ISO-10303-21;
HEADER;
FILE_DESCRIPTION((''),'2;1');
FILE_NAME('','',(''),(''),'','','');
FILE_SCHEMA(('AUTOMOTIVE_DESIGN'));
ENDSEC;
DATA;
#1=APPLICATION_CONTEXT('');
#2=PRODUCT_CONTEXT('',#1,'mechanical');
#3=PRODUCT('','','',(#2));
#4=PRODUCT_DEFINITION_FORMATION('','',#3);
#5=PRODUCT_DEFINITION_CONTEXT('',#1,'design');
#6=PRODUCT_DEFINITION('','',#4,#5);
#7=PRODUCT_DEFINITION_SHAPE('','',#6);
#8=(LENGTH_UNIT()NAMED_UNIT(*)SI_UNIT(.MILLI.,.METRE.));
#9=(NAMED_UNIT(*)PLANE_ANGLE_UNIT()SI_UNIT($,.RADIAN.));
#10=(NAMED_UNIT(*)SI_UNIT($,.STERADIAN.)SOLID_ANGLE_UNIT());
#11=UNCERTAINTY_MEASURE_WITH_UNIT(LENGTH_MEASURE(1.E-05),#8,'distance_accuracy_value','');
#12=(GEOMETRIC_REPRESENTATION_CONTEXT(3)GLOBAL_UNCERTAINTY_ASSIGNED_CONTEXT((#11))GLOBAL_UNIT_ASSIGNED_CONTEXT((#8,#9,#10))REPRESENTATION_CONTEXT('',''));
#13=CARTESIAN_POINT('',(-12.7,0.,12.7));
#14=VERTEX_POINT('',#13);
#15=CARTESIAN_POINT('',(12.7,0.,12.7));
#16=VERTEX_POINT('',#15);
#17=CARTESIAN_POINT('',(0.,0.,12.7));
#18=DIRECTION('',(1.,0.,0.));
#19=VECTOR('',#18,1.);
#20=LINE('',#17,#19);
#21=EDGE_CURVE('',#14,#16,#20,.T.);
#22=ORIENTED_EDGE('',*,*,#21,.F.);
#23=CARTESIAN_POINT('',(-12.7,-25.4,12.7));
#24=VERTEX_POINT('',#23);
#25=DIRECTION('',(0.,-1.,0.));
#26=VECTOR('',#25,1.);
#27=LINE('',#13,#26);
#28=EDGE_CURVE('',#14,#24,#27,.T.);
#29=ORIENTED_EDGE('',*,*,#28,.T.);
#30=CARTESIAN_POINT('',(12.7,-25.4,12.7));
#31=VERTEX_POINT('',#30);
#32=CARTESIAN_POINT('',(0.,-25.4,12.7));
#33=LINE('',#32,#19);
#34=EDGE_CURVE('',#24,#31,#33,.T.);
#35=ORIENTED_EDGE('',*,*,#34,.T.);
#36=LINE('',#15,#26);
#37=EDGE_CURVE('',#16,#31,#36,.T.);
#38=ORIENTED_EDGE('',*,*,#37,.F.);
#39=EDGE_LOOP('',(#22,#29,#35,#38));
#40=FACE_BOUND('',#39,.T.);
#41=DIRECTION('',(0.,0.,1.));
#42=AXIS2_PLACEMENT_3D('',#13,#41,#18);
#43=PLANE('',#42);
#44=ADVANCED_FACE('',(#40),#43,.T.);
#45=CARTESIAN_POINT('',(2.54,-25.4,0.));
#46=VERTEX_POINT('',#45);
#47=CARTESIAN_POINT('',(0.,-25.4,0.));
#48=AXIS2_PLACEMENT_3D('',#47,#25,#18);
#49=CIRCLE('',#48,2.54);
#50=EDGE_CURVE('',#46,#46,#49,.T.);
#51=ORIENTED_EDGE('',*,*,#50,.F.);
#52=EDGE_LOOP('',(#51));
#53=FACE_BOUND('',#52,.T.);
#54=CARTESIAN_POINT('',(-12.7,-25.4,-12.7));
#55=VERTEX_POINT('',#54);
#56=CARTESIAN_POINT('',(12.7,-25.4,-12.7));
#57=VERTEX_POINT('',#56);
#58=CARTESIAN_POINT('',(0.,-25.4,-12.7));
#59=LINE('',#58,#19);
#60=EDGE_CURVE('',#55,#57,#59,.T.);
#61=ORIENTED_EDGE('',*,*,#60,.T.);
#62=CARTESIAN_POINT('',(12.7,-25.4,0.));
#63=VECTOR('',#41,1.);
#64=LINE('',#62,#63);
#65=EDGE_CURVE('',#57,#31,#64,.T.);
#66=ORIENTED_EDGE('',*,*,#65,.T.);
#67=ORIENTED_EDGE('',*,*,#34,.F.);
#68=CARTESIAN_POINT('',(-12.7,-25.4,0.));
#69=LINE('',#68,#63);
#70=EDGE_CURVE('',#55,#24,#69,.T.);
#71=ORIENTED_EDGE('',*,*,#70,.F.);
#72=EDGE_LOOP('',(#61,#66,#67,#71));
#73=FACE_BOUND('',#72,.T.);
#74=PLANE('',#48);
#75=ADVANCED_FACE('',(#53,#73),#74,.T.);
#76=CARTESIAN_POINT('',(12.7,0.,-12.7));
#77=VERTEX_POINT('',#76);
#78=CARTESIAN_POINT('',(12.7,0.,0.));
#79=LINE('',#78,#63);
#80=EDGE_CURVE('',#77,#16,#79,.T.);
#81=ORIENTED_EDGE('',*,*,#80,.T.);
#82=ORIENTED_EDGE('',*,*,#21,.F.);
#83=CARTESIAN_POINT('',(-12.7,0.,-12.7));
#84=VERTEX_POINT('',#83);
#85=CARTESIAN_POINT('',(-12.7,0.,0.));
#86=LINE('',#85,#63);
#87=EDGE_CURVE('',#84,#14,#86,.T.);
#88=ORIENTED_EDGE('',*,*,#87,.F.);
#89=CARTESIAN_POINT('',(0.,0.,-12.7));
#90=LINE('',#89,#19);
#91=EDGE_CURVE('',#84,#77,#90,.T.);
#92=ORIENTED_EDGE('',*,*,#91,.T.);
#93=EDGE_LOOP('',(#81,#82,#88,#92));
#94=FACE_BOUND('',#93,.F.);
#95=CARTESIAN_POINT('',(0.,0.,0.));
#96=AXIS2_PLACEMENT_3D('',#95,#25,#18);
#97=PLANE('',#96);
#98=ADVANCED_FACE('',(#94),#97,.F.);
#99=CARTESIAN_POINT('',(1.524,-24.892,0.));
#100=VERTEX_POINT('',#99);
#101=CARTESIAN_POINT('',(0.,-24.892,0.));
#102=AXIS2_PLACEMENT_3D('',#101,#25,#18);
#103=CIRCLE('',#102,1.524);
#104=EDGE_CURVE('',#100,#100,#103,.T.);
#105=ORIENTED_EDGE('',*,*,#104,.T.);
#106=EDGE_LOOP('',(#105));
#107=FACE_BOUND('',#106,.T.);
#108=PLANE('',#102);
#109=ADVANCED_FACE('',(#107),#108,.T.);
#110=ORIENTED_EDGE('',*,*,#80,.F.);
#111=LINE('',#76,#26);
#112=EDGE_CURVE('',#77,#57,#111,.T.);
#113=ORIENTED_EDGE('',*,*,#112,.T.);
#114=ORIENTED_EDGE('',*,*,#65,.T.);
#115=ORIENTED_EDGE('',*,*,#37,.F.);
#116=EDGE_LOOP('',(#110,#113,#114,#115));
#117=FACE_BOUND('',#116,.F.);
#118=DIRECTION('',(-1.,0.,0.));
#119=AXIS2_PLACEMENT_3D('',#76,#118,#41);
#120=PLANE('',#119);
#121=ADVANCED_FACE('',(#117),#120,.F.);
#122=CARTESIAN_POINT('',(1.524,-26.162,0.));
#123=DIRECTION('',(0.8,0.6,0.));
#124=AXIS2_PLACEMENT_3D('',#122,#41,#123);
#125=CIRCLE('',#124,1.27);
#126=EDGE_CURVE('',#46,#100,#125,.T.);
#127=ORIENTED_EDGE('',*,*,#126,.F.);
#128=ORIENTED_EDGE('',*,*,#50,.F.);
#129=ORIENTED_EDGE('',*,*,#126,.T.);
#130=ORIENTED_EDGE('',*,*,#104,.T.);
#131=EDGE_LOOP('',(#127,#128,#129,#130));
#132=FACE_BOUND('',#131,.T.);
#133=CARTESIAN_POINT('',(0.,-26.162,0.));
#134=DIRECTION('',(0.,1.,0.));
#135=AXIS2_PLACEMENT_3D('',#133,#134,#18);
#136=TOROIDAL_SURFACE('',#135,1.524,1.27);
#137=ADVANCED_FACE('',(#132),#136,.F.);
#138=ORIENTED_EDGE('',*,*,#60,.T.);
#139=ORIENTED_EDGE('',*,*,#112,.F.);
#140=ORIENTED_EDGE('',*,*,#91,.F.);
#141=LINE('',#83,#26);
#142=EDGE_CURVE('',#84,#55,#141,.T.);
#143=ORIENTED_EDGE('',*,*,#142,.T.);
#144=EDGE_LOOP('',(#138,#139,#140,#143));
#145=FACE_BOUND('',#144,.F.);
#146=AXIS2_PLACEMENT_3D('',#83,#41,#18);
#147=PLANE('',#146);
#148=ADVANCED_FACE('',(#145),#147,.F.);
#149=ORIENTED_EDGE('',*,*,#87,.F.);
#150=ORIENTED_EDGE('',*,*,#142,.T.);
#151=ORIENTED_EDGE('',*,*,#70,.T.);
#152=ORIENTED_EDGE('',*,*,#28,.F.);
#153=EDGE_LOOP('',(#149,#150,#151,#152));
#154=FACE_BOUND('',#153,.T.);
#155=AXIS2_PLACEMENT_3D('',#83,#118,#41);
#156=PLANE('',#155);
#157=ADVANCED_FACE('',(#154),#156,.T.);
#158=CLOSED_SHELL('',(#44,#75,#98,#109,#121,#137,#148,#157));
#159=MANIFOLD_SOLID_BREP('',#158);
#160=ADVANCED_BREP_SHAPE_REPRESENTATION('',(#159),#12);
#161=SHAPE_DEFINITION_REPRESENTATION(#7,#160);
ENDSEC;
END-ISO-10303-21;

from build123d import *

# Parameters (mm, degrees)
F0_W     = 25.4
F0_H     = 25.4
F1_DEPTH = 25.4
F2_R     = 2.54
F3_DEPTH = 0.508


# Not quite as in the source:
# - a fillet or chamfer that OpenCascade refuses, or shapes differently, is made with other operations: its cross-section is extruded or revolved along the edge and cut away or added


with BuildPart() as f1:
    # F0 (on Front) → F1 (new body)
    with BuildSketch(Plane.XZ):
        Rectangle(F0_W, F0_H)
    extrude(amount=F1_DEPTH)

    # F2 (on face) → F3 (cut)
    with BuildSketch(Plane.XZ.offset(25.4)):
        Circle(F2_R)
    extrude(amount=-F3_DEPTH, mode=Mode.SUBTRACT)

    # F4: fillet of radius 1.27 on 1 edges, made by hand

    # F4_s1 → F4_t2 (revolve)
    with BuildSketch(Plane.XY):
        with BuildLine():
            ThreePointArc((2.54, -25.4), (2.0919612663, -25.0260774674), (1.524, -24.892))
            Line((1.524, -24.892), (2.54, -24.892))
            Line((2.54, -24.892), (2.54, -25.4))
        make_face()
    revolve(axis=Axis((0, -24.892, 0), (0, -1, 0)))


solid = f1.part
